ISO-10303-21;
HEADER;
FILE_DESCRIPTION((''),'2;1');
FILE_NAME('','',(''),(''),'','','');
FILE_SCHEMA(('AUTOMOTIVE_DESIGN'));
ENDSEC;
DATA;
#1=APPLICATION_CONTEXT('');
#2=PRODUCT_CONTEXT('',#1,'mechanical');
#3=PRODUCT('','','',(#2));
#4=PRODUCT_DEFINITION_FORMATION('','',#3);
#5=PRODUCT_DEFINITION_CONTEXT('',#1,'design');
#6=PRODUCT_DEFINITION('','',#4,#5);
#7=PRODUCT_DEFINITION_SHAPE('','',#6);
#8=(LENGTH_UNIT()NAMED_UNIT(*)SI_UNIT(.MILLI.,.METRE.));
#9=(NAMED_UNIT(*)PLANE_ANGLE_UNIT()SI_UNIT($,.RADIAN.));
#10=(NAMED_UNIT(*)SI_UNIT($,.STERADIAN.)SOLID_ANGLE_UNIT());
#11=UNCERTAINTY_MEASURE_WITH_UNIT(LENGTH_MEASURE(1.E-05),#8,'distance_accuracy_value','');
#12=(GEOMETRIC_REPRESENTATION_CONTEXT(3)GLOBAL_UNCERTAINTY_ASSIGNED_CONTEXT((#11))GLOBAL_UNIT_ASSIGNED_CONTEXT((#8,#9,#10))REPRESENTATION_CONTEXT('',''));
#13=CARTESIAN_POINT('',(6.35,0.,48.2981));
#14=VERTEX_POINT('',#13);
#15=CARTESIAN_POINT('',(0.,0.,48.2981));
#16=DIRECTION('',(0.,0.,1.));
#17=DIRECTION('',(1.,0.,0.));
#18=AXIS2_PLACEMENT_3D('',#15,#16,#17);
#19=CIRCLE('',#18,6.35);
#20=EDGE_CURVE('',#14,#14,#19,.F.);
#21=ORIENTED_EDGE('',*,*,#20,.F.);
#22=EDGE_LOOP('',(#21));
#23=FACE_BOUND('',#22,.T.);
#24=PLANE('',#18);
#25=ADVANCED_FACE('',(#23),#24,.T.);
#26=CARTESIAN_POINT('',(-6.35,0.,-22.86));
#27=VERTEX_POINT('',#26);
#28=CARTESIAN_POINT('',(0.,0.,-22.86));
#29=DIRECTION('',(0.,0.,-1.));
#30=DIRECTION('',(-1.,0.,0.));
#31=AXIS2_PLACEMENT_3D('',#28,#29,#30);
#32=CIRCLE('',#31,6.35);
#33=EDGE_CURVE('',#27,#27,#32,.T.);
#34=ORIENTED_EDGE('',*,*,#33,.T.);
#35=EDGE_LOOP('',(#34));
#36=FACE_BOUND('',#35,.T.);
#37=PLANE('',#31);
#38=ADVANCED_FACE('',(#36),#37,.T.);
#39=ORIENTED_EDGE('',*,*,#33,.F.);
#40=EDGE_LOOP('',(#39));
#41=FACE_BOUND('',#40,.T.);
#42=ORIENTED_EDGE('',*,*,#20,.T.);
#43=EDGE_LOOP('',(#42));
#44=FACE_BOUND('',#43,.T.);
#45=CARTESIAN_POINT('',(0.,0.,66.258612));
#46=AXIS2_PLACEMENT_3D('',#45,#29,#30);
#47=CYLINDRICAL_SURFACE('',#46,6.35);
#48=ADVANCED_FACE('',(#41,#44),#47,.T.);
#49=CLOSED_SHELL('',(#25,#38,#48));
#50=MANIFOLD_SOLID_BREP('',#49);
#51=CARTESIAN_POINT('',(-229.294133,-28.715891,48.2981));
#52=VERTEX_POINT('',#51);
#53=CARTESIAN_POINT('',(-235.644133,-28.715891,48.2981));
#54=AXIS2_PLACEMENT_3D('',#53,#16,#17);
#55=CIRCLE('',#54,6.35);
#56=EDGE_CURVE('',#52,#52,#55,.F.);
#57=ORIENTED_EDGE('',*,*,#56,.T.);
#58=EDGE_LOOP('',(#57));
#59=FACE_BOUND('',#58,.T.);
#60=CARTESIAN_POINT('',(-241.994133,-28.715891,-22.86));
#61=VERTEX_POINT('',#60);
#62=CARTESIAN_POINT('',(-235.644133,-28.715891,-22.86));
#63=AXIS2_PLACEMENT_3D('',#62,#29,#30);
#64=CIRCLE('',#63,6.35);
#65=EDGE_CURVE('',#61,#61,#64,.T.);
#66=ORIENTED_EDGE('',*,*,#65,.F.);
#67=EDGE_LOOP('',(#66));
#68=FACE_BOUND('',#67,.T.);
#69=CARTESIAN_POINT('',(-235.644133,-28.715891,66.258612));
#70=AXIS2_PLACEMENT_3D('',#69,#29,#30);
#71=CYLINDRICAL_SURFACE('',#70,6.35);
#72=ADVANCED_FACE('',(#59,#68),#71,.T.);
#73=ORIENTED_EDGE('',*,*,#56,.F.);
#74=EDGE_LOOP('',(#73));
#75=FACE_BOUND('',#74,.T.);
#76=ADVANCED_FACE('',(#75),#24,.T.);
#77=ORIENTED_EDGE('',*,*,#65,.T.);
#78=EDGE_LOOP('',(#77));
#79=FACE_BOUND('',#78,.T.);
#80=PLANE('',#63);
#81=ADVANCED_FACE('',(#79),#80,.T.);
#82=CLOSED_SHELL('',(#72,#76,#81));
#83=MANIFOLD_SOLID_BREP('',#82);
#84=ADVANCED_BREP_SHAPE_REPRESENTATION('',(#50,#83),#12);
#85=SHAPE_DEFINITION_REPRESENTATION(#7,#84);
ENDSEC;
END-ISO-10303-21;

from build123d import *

# Parameters (mm, degrees)
BOSS_EXTRUDE1_START     = -71.1581
BOSS_EXTRUDE1_OUTLINE_R = 6.35
BOSS_EXTRUDE1_DEPTH     = 71.1581


# Read off the part's stored shape, not the designer's step: Boss-Extrude1
with BuildPart() as part:
    # Boss-Extrude1 outline → Boss-Extrude1 (new body)
    with BuildSketch(Plane(origin=(0, 0, -22.86), x_dir=(-1, 0, 0), z_dir=(0, 0, -1)).offset(BOSS_EXTRUDE1_START)):
        Circle(BOSS_EXTRUDE1_OUTLINE_R)
        with Locations((235.644133072, -28.715891479)):
            Circle(BOSS_EXTRUDE1_OUTLINE_R)
    extrude(amount=BOSS_EXTRUDE1_DEPTH)


solid = part.part
